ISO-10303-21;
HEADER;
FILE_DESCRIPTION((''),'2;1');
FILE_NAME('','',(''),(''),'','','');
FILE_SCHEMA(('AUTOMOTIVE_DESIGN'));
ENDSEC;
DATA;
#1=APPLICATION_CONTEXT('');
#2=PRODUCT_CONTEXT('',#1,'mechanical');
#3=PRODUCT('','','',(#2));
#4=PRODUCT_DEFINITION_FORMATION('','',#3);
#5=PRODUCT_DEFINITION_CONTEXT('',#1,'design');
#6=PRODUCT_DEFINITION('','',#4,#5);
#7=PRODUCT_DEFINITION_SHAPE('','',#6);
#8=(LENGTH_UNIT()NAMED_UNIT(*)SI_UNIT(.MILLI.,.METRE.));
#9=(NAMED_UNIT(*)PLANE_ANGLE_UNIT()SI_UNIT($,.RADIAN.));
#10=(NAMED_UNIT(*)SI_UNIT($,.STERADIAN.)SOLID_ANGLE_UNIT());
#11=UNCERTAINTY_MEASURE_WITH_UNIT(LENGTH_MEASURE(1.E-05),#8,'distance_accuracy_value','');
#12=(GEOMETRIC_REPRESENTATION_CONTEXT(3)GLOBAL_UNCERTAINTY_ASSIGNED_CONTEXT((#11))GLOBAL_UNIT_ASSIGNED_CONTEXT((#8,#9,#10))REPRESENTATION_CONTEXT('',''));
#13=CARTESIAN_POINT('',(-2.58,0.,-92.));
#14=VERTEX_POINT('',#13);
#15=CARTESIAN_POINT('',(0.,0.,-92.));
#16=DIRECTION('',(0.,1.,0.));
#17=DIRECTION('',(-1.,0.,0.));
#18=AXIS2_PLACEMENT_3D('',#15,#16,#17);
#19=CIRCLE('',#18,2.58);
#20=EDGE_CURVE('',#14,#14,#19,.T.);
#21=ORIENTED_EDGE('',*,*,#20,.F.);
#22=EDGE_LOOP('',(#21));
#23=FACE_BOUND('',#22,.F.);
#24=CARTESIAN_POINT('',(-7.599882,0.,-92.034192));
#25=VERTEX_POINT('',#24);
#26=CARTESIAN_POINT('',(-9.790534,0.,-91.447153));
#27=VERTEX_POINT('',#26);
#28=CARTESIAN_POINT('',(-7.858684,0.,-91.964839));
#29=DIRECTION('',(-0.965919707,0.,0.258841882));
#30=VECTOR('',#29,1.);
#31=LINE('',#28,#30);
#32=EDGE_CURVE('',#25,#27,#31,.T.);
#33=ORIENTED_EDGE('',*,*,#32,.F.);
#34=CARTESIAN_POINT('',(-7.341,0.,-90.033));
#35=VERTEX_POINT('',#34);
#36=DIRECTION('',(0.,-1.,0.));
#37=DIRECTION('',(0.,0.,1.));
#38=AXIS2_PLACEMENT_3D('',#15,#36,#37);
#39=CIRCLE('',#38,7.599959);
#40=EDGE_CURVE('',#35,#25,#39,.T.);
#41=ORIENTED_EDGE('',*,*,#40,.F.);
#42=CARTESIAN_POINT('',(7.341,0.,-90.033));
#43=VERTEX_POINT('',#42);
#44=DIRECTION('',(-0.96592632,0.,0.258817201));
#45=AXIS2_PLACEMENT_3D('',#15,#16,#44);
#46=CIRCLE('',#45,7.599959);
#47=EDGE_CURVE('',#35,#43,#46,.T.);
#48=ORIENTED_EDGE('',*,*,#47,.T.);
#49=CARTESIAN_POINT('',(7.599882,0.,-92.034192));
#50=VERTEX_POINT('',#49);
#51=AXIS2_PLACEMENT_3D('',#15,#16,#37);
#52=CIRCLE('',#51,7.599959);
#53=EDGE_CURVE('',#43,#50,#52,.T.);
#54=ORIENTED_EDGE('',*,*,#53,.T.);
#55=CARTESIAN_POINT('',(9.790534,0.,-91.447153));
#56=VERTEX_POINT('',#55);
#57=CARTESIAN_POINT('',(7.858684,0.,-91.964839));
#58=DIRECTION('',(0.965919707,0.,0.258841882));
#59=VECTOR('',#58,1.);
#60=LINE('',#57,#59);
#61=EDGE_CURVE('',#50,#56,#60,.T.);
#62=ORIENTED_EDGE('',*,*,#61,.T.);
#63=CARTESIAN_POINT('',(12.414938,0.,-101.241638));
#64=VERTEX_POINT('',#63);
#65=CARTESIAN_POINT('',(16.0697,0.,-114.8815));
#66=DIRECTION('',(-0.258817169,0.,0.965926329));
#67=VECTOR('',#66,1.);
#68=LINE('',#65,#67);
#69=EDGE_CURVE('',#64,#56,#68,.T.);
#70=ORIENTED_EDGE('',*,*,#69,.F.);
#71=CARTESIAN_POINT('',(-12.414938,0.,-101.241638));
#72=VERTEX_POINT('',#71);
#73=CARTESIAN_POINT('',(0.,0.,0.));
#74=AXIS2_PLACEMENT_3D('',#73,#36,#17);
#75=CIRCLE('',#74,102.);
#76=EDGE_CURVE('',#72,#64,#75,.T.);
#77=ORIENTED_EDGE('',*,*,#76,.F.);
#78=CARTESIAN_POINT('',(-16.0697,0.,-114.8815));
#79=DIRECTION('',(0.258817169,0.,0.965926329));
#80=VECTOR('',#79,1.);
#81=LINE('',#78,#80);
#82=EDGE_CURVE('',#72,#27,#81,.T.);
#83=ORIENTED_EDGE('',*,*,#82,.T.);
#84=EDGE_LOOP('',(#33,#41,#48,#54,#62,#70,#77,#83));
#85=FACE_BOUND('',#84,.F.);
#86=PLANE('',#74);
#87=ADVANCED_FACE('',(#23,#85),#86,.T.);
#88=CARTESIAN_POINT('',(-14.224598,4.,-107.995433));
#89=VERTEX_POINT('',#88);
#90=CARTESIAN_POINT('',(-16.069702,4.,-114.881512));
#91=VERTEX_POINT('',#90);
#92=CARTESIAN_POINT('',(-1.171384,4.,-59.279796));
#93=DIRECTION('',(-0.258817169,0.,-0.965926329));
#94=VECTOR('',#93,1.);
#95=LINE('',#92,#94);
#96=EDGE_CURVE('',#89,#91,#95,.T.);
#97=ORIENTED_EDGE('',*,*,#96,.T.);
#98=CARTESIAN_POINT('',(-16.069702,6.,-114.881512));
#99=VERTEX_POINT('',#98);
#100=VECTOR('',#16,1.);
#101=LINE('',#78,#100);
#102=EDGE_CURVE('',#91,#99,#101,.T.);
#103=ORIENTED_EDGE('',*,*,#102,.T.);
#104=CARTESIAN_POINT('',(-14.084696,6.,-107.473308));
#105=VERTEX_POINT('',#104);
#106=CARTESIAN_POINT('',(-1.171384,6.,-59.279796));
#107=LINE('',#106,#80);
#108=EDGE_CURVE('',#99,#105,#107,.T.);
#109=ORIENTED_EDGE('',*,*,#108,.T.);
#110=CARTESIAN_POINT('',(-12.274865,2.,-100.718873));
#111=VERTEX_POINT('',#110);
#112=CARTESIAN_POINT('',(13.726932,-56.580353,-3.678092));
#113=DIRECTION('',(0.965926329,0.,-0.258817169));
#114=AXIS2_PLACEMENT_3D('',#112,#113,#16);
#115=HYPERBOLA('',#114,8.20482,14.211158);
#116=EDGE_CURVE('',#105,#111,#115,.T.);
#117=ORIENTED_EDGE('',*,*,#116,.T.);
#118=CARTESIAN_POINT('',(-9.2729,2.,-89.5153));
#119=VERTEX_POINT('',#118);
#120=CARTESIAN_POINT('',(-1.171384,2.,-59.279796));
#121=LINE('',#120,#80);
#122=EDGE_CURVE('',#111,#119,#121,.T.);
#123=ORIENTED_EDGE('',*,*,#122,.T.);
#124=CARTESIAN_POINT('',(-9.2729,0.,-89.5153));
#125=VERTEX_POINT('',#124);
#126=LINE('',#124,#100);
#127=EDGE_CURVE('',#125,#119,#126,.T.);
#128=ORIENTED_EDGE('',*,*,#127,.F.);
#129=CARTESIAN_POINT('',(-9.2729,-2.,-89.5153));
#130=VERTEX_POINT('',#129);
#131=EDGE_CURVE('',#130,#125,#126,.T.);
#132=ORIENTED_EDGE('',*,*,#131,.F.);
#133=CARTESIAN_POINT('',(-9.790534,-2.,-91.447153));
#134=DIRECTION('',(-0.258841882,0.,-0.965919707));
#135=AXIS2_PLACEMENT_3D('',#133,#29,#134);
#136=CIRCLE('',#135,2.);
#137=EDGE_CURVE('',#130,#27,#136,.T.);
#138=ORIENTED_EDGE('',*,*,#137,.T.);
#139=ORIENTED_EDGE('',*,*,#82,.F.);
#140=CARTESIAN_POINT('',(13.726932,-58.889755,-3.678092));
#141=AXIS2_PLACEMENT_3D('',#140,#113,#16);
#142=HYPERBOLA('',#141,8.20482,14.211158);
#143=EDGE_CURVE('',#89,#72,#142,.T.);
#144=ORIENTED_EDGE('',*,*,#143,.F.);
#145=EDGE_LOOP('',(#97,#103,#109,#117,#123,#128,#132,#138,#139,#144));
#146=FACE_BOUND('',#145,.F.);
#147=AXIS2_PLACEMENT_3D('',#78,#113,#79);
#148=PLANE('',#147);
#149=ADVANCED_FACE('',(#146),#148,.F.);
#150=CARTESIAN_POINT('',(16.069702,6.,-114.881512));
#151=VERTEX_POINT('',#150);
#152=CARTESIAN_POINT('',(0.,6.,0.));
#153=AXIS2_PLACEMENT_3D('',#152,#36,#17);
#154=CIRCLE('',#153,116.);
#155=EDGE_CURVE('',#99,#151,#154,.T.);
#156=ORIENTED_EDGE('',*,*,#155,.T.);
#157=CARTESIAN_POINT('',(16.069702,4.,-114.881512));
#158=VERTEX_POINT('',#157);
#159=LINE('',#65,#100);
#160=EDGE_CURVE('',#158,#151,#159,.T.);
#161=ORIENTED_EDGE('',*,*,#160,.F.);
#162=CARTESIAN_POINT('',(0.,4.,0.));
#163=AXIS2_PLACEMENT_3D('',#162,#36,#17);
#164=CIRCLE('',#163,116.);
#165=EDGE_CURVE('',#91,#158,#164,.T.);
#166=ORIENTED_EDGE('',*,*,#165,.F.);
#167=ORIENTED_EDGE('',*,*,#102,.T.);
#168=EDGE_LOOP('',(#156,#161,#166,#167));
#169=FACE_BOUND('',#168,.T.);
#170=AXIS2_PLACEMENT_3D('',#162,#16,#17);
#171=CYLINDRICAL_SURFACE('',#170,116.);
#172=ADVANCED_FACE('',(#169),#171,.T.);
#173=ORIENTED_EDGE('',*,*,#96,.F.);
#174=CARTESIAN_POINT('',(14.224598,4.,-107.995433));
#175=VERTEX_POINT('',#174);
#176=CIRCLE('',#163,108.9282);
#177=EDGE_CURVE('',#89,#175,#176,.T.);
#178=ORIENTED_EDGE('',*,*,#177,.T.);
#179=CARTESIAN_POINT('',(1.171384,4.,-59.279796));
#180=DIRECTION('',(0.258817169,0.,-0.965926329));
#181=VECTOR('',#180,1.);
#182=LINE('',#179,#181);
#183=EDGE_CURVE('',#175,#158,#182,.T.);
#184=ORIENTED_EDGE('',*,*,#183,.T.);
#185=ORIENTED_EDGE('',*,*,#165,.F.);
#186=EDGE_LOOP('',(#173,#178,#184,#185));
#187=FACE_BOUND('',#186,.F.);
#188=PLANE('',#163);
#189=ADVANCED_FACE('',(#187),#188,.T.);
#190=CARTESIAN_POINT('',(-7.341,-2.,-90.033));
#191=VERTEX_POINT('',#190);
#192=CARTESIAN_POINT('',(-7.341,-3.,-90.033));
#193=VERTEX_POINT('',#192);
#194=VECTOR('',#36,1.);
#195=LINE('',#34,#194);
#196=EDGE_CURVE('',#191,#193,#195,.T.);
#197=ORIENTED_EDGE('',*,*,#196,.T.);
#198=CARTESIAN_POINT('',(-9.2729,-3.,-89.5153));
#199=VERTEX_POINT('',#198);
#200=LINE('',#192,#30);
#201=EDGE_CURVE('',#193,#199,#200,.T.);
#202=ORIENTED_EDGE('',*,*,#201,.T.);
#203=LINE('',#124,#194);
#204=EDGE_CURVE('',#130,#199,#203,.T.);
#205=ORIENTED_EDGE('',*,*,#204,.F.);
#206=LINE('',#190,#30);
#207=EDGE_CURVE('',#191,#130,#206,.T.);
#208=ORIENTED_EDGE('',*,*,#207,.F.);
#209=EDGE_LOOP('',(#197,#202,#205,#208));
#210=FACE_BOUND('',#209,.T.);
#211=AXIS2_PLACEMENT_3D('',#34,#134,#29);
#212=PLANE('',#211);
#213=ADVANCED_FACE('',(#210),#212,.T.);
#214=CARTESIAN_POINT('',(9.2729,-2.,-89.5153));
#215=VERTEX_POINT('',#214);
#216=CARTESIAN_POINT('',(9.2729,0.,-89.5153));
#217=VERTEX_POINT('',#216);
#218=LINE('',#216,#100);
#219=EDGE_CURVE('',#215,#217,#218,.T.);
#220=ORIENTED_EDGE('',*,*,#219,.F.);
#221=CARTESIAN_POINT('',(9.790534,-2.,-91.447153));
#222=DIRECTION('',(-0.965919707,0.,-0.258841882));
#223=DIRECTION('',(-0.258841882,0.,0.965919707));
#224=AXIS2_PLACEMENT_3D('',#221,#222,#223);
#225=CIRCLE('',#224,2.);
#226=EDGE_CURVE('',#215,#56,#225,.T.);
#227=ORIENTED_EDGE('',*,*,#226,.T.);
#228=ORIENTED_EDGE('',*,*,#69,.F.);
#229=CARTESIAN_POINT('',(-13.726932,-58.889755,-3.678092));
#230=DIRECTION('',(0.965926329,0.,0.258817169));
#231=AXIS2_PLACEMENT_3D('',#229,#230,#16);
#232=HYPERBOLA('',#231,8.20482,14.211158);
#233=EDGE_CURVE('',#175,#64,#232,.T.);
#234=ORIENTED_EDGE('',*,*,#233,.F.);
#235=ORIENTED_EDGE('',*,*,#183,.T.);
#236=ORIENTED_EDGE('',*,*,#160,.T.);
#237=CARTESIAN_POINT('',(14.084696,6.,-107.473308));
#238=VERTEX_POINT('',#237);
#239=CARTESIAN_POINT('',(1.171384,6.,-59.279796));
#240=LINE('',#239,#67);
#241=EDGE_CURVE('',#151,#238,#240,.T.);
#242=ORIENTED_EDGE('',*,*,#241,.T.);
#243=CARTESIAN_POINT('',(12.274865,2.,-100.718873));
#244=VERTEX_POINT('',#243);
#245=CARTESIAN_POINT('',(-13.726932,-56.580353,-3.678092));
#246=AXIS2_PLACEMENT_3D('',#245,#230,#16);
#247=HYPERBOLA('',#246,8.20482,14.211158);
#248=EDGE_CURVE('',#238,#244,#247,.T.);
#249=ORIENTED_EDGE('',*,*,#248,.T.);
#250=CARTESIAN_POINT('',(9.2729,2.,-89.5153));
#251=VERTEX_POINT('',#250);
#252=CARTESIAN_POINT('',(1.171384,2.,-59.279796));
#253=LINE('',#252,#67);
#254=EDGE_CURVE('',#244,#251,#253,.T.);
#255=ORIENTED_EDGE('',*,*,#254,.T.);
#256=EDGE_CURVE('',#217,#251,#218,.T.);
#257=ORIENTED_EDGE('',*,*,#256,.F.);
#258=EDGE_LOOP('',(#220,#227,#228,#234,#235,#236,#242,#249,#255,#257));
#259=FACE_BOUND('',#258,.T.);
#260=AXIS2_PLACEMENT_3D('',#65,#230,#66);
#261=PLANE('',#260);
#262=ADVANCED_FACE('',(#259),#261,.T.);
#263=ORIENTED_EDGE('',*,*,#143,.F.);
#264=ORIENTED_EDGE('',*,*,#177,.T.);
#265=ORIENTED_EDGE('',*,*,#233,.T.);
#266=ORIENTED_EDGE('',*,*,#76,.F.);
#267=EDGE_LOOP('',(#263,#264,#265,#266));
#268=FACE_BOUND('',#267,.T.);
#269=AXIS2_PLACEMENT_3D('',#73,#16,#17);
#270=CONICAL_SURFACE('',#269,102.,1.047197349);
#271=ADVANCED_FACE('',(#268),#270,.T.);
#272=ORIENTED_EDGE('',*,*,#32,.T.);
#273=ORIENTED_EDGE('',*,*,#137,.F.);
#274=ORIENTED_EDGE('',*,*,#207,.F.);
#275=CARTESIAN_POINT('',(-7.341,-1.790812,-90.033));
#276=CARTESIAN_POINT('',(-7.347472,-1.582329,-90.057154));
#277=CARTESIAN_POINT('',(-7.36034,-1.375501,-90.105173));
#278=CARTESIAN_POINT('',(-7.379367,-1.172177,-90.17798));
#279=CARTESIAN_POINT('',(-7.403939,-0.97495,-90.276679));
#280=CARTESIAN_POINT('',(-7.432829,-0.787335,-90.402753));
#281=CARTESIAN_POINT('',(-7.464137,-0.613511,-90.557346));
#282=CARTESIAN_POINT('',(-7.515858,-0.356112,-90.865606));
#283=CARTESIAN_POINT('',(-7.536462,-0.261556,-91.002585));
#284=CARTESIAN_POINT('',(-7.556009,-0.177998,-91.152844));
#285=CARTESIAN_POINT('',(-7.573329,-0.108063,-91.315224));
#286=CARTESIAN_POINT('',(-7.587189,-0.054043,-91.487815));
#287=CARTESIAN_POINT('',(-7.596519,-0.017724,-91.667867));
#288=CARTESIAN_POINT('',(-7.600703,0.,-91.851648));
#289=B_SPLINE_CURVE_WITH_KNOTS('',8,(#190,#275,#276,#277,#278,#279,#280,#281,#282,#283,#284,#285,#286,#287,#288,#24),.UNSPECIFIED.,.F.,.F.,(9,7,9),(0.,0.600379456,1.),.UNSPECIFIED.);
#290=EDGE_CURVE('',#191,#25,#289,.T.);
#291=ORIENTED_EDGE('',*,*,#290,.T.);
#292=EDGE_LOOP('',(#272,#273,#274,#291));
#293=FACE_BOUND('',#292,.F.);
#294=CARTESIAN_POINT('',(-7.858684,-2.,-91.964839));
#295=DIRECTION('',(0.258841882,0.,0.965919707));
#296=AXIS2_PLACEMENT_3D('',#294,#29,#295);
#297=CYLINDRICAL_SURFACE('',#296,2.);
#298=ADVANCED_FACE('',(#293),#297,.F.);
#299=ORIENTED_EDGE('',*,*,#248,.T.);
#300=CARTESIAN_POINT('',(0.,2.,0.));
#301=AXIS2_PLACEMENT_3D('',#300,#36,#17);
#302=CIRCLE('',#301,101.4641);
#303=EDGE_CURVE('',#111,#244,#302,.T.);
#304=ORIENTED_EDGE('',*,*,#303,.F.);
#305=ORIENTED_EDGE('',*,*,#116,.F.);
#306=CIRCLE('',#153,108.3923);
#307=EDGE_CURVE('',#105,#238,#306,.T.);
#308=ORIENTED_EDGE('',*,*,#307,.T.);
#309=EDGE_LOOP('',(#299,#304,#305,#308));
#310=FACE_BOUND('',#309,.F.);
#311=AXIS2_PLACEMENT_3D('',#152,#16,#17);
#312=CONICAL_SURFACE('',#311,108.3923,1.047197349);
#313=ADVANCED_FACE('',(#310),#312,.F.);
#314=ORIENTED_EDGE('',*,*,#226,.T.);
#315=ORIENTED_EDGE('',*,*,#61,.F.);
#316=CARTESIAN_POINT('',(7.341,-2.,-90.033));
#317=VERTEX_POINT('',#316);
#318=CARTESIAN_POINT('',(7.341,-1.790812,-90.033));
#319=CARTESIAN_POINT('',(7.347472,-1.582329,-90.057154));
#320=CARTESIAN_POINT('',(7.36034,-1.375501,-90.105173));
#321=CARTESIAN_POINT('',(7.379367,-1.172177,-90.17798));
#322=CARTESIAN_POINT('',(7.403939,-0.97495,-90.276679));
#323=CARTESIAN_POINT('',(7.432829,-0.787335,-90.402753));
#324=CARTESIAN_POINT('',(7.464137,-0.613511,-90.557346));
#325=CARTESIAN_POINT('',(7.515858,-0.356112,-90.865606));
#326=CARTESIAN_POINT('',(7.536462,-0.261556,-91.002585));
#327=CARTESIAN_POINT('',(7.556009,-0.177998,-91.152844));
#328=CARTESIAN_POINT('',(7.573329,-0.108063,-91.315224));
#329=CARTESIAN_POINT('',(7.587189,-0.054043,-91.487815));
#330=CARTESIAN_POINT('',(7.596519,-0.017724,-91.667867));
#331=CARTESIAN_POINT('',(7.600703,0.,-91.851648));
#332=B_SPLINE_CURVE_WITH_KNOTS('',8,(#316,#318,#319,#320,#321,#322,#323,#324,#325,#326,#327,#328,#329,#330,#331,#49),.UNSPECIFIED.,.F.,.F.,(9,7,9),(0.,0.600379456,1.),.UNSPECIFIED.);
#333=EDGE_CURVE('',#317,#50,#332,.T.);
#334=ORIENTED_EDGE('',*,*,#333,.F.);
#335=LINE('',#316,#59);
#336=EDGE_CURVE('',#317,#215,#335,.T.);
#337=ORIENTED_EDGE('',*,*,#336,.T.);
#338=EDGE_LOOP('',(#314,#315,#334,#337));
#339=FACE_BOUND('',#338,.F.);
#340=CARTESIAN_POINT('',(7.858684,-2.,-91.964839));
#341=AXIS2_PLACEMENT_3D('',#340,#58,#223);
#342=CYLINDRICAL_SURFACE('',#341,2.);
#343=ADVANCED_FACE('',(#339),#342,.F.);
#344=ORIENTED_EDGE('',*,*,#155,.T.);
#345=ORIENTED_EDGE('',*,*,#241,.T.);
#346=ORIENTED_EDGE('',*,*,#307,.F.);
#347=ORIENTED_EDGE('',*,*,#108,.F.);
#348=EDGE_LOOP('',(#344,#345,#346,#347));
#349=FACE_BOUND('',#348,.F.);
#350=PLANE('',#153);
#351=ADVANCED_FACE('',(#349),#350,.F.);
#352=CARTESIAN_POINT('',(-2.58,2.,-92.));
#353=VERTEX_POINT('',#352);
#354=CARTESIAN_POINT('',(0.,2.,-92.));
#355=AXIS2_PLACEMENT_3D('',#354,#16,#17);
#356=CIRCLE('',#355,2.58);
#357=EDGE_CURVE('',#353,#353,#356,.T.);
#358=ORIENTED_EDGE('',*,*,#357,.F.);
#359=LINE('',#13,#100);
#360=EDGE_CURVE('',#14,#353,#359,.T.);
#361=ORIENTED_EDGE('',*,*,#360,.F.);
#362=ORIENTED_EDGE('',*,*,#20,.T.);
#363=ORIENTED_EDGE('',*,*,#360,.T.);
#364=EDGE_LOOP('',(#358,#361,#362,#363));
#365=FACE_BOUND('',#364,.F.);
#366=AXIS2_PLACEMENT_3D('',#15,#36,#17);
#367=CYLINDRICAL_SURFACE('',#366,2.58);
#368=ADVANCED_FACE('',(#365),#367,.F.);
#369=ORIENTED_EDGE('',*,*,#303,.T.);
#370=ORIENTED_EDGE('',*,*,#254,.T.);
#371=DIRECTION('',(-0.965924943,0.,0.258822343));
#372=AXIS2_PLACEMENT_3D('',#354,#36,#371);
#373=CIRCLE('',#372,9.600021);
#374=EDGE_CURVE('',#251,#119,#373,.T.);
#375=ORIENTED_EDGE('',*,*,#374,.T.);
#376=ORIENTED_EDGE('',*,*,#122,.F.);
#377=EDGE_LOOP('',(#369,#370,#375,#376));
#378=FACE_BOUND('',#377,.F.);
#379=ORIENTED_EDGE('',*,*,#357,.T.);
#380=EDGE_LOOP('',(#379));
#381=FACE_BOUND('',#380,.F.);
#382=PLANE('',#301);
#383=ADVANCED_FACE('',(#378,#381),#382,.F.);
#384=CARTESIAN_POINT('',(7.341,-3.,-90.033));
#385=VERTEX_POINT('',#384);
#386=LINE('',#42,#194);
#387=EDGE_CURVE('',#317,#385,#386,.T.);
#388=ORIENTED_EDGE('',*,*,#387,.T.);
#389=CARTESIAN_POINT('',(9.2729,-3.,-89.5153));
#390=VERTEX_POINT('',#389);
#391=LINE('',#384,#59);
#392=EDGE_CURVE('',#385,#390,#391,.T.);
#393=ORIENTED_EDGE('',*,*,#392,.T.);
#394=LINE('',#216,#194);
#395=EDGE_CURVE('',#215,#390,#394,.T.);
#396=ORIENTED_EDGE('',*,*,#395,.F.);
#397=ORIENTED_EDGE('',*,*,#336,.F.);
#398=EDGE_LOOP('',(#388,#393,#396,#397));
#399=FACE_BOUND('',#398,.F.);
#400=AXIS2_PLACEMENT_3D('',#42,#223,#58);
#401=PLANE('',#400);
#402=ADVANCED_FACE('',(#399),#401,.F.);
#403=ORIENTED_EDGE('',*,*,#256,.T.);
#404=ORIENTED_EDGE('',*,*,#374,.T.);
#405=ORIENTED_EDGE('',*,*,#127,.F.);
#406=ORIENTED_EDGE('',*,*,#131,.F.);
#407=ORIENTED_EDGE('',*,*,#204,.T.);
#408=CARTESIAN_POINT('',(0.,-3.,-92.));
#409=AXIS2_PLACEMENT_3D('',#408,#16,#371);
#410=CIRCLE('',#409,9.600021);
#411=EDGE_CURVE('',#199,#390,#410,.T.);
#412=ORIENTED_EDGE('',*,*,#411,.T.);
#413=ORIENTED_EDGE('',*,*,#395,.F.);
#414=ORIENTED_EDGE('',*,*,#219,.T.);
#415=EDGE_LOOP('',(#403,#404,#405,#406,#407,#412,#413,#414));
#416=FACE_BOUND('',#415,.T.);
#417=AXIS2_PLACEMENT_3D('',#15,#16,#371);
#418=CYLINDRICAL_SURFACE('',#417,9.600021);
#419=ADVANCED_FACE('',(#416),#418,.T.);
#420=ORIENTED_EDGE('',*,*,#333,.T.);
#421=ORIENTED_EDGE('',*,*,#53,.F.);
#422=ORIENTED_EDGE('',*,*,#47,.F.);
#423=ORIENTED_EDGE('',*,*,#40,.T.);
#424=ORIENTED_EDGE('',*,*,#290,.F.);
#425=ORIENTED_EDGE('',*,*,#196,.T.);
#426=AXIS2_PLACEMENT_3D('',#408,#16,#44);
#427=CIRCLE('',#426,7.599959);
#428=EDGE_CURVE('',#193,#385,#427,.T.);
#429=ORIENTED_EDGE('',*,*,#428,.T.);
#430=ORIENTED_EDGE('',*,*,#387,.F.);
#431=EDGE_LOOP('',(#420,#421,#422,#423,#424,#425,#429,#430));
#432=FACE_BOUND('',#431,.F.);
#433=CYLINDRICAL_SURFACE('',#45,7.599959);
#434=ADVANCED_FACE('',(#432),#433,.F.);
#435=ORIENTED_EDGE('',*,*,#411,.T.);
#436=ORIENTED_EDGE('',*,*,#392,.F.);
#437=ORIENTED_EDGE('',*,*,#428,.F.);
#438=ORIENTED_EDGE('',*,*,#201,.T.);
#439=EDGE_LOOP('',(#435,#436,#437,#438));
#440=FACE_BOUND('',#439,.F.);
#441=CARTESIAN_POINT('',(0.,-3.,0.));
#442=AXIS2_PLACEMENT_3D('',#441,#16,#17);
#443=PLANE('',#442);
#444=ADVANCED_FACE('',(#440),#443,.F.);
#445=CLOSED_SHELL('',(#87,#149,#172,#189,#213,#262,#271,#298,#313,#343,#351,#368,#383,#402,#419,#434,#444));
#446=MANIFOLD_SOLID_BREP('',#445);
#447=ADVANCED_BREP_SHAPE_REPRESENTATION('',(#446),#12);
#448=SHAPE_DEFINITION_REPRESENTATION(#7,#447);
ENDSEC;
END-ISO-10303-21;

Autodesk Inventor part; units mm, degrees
ref_plane "YZ Plane" through (0, 0, 0) normal (1, 0, 0) x (0, 1, 0)
ref_plane "XZ Plane" through (0, 0, 0) normal (0, 1, 0) x (-1, 0, 0)
ref_plane "XY Plane" through (0, 0, 0) normal (0, 0, 1) x (1, 0, 0)
sketch "草圖5" plane through (0, 0, 0) normal (0, 0, 1) x (1, 0, 0)
  line L0 (0, 14.1091) -> (0, -11.8545)
  line L1 (-92, 0) -> (-102, 0)
  line L2 (-102, 0) -> (-108.9282, 4)
  line L3 (-108.9282, 4) -> (-116, 4)
  line L4 (-116, 4) -> (-116, 6)
  line L5 (-116, 6) -> (-108.3923, 6)
  line L6 (-108.3923, 6) -> (-101.4641, 2)
  line L7 (-101.4641, 2) -> (-92, 2)
  line L8 (-92, 4.8545) -> (-92, -2.1478) construction
  line L9 (-92, 0) -> (-82, 0)
  line L10 (-82, 0) -> (-82, 2)
  line L11 (-82, 2) -> (-92, 2)
  point P0 (0, 0)
  point P1 (0, 2)
  dimension "d26" = 2
  dimension "d27" = 232
  dimension "d28" = 92
  dimension "d31" = 2
  dimension "d32" = 2
  dimension "d33" = 4
  dimension "d34" = 30
  dimension "d35" = 20
revolve "迴轉1" add sketch "草圖5" angle 360 about axis through (0, 14.1091, 0) along (0, -1, 0)
sketch "草圖6" plane through (0, 0, 0) normal (0, 1, 0) x (-1, 0, 0)
  circle A0 centre (0, -92) radius 2.58
  line L0 (0, -136.9187) -> (0, 28.2306) construction
  line L1 (-16.0697, -114.8815) -> (-9.2729, -89.5153)
  arc A1 (7.341, -90.033) -> (-7.341, -90.033) centre (0, -92) ccw
  line L2 (16.0697, -114.8815) -> (9.2729, -89.5153)
  arc A2 (-16.0697, -114.8815) -> (16.0697, -114.8815) centre (0, 0) ccw
  circle A3 centre (0, 0) radius 116 construction
  arc A4 (9.2729, -89.5153) -> (-9.2729, -89.5153) centre (0, -92) ccw
  arc A5 (-9.7984, -91.4767) -> (9.7984, -91.4767) centre (0, 0) ccw construction
  line L3 (-7.341, -90.033) -> (-9.2729, -89.5153)
  line L4 (7.341, -90.033) -> (9.2729, -89.5153)
  arc A6 (7.2444, -90.0589) -> (-7.2207, -89.9724) centre (0, -92) ccw construction
  point P0 (-9.2729, -89.5153)
  dimension "d38" = 92
  dimension "d46" = 5.16
  dimension "d81" = 7.6
  dimension "d82" = 2
  dimension "d83" = 30
  dimension "d88" = 7.5
extrude "擠出5" cut sketch "草圖6" along normal up to next contours A0
extrude "擠出8" cut sketch "草圖6" along normal blind 10 keep common part
extrude "擠出9" add sketch "草圖6" against normal blind 3 contours A4 L4 A1 L3
fillet "圓角5" radius 2 2 edges at (8.307, 0, -89.7742) (-8.307, 0, -89.7742)
properties part number "transmission_support"
